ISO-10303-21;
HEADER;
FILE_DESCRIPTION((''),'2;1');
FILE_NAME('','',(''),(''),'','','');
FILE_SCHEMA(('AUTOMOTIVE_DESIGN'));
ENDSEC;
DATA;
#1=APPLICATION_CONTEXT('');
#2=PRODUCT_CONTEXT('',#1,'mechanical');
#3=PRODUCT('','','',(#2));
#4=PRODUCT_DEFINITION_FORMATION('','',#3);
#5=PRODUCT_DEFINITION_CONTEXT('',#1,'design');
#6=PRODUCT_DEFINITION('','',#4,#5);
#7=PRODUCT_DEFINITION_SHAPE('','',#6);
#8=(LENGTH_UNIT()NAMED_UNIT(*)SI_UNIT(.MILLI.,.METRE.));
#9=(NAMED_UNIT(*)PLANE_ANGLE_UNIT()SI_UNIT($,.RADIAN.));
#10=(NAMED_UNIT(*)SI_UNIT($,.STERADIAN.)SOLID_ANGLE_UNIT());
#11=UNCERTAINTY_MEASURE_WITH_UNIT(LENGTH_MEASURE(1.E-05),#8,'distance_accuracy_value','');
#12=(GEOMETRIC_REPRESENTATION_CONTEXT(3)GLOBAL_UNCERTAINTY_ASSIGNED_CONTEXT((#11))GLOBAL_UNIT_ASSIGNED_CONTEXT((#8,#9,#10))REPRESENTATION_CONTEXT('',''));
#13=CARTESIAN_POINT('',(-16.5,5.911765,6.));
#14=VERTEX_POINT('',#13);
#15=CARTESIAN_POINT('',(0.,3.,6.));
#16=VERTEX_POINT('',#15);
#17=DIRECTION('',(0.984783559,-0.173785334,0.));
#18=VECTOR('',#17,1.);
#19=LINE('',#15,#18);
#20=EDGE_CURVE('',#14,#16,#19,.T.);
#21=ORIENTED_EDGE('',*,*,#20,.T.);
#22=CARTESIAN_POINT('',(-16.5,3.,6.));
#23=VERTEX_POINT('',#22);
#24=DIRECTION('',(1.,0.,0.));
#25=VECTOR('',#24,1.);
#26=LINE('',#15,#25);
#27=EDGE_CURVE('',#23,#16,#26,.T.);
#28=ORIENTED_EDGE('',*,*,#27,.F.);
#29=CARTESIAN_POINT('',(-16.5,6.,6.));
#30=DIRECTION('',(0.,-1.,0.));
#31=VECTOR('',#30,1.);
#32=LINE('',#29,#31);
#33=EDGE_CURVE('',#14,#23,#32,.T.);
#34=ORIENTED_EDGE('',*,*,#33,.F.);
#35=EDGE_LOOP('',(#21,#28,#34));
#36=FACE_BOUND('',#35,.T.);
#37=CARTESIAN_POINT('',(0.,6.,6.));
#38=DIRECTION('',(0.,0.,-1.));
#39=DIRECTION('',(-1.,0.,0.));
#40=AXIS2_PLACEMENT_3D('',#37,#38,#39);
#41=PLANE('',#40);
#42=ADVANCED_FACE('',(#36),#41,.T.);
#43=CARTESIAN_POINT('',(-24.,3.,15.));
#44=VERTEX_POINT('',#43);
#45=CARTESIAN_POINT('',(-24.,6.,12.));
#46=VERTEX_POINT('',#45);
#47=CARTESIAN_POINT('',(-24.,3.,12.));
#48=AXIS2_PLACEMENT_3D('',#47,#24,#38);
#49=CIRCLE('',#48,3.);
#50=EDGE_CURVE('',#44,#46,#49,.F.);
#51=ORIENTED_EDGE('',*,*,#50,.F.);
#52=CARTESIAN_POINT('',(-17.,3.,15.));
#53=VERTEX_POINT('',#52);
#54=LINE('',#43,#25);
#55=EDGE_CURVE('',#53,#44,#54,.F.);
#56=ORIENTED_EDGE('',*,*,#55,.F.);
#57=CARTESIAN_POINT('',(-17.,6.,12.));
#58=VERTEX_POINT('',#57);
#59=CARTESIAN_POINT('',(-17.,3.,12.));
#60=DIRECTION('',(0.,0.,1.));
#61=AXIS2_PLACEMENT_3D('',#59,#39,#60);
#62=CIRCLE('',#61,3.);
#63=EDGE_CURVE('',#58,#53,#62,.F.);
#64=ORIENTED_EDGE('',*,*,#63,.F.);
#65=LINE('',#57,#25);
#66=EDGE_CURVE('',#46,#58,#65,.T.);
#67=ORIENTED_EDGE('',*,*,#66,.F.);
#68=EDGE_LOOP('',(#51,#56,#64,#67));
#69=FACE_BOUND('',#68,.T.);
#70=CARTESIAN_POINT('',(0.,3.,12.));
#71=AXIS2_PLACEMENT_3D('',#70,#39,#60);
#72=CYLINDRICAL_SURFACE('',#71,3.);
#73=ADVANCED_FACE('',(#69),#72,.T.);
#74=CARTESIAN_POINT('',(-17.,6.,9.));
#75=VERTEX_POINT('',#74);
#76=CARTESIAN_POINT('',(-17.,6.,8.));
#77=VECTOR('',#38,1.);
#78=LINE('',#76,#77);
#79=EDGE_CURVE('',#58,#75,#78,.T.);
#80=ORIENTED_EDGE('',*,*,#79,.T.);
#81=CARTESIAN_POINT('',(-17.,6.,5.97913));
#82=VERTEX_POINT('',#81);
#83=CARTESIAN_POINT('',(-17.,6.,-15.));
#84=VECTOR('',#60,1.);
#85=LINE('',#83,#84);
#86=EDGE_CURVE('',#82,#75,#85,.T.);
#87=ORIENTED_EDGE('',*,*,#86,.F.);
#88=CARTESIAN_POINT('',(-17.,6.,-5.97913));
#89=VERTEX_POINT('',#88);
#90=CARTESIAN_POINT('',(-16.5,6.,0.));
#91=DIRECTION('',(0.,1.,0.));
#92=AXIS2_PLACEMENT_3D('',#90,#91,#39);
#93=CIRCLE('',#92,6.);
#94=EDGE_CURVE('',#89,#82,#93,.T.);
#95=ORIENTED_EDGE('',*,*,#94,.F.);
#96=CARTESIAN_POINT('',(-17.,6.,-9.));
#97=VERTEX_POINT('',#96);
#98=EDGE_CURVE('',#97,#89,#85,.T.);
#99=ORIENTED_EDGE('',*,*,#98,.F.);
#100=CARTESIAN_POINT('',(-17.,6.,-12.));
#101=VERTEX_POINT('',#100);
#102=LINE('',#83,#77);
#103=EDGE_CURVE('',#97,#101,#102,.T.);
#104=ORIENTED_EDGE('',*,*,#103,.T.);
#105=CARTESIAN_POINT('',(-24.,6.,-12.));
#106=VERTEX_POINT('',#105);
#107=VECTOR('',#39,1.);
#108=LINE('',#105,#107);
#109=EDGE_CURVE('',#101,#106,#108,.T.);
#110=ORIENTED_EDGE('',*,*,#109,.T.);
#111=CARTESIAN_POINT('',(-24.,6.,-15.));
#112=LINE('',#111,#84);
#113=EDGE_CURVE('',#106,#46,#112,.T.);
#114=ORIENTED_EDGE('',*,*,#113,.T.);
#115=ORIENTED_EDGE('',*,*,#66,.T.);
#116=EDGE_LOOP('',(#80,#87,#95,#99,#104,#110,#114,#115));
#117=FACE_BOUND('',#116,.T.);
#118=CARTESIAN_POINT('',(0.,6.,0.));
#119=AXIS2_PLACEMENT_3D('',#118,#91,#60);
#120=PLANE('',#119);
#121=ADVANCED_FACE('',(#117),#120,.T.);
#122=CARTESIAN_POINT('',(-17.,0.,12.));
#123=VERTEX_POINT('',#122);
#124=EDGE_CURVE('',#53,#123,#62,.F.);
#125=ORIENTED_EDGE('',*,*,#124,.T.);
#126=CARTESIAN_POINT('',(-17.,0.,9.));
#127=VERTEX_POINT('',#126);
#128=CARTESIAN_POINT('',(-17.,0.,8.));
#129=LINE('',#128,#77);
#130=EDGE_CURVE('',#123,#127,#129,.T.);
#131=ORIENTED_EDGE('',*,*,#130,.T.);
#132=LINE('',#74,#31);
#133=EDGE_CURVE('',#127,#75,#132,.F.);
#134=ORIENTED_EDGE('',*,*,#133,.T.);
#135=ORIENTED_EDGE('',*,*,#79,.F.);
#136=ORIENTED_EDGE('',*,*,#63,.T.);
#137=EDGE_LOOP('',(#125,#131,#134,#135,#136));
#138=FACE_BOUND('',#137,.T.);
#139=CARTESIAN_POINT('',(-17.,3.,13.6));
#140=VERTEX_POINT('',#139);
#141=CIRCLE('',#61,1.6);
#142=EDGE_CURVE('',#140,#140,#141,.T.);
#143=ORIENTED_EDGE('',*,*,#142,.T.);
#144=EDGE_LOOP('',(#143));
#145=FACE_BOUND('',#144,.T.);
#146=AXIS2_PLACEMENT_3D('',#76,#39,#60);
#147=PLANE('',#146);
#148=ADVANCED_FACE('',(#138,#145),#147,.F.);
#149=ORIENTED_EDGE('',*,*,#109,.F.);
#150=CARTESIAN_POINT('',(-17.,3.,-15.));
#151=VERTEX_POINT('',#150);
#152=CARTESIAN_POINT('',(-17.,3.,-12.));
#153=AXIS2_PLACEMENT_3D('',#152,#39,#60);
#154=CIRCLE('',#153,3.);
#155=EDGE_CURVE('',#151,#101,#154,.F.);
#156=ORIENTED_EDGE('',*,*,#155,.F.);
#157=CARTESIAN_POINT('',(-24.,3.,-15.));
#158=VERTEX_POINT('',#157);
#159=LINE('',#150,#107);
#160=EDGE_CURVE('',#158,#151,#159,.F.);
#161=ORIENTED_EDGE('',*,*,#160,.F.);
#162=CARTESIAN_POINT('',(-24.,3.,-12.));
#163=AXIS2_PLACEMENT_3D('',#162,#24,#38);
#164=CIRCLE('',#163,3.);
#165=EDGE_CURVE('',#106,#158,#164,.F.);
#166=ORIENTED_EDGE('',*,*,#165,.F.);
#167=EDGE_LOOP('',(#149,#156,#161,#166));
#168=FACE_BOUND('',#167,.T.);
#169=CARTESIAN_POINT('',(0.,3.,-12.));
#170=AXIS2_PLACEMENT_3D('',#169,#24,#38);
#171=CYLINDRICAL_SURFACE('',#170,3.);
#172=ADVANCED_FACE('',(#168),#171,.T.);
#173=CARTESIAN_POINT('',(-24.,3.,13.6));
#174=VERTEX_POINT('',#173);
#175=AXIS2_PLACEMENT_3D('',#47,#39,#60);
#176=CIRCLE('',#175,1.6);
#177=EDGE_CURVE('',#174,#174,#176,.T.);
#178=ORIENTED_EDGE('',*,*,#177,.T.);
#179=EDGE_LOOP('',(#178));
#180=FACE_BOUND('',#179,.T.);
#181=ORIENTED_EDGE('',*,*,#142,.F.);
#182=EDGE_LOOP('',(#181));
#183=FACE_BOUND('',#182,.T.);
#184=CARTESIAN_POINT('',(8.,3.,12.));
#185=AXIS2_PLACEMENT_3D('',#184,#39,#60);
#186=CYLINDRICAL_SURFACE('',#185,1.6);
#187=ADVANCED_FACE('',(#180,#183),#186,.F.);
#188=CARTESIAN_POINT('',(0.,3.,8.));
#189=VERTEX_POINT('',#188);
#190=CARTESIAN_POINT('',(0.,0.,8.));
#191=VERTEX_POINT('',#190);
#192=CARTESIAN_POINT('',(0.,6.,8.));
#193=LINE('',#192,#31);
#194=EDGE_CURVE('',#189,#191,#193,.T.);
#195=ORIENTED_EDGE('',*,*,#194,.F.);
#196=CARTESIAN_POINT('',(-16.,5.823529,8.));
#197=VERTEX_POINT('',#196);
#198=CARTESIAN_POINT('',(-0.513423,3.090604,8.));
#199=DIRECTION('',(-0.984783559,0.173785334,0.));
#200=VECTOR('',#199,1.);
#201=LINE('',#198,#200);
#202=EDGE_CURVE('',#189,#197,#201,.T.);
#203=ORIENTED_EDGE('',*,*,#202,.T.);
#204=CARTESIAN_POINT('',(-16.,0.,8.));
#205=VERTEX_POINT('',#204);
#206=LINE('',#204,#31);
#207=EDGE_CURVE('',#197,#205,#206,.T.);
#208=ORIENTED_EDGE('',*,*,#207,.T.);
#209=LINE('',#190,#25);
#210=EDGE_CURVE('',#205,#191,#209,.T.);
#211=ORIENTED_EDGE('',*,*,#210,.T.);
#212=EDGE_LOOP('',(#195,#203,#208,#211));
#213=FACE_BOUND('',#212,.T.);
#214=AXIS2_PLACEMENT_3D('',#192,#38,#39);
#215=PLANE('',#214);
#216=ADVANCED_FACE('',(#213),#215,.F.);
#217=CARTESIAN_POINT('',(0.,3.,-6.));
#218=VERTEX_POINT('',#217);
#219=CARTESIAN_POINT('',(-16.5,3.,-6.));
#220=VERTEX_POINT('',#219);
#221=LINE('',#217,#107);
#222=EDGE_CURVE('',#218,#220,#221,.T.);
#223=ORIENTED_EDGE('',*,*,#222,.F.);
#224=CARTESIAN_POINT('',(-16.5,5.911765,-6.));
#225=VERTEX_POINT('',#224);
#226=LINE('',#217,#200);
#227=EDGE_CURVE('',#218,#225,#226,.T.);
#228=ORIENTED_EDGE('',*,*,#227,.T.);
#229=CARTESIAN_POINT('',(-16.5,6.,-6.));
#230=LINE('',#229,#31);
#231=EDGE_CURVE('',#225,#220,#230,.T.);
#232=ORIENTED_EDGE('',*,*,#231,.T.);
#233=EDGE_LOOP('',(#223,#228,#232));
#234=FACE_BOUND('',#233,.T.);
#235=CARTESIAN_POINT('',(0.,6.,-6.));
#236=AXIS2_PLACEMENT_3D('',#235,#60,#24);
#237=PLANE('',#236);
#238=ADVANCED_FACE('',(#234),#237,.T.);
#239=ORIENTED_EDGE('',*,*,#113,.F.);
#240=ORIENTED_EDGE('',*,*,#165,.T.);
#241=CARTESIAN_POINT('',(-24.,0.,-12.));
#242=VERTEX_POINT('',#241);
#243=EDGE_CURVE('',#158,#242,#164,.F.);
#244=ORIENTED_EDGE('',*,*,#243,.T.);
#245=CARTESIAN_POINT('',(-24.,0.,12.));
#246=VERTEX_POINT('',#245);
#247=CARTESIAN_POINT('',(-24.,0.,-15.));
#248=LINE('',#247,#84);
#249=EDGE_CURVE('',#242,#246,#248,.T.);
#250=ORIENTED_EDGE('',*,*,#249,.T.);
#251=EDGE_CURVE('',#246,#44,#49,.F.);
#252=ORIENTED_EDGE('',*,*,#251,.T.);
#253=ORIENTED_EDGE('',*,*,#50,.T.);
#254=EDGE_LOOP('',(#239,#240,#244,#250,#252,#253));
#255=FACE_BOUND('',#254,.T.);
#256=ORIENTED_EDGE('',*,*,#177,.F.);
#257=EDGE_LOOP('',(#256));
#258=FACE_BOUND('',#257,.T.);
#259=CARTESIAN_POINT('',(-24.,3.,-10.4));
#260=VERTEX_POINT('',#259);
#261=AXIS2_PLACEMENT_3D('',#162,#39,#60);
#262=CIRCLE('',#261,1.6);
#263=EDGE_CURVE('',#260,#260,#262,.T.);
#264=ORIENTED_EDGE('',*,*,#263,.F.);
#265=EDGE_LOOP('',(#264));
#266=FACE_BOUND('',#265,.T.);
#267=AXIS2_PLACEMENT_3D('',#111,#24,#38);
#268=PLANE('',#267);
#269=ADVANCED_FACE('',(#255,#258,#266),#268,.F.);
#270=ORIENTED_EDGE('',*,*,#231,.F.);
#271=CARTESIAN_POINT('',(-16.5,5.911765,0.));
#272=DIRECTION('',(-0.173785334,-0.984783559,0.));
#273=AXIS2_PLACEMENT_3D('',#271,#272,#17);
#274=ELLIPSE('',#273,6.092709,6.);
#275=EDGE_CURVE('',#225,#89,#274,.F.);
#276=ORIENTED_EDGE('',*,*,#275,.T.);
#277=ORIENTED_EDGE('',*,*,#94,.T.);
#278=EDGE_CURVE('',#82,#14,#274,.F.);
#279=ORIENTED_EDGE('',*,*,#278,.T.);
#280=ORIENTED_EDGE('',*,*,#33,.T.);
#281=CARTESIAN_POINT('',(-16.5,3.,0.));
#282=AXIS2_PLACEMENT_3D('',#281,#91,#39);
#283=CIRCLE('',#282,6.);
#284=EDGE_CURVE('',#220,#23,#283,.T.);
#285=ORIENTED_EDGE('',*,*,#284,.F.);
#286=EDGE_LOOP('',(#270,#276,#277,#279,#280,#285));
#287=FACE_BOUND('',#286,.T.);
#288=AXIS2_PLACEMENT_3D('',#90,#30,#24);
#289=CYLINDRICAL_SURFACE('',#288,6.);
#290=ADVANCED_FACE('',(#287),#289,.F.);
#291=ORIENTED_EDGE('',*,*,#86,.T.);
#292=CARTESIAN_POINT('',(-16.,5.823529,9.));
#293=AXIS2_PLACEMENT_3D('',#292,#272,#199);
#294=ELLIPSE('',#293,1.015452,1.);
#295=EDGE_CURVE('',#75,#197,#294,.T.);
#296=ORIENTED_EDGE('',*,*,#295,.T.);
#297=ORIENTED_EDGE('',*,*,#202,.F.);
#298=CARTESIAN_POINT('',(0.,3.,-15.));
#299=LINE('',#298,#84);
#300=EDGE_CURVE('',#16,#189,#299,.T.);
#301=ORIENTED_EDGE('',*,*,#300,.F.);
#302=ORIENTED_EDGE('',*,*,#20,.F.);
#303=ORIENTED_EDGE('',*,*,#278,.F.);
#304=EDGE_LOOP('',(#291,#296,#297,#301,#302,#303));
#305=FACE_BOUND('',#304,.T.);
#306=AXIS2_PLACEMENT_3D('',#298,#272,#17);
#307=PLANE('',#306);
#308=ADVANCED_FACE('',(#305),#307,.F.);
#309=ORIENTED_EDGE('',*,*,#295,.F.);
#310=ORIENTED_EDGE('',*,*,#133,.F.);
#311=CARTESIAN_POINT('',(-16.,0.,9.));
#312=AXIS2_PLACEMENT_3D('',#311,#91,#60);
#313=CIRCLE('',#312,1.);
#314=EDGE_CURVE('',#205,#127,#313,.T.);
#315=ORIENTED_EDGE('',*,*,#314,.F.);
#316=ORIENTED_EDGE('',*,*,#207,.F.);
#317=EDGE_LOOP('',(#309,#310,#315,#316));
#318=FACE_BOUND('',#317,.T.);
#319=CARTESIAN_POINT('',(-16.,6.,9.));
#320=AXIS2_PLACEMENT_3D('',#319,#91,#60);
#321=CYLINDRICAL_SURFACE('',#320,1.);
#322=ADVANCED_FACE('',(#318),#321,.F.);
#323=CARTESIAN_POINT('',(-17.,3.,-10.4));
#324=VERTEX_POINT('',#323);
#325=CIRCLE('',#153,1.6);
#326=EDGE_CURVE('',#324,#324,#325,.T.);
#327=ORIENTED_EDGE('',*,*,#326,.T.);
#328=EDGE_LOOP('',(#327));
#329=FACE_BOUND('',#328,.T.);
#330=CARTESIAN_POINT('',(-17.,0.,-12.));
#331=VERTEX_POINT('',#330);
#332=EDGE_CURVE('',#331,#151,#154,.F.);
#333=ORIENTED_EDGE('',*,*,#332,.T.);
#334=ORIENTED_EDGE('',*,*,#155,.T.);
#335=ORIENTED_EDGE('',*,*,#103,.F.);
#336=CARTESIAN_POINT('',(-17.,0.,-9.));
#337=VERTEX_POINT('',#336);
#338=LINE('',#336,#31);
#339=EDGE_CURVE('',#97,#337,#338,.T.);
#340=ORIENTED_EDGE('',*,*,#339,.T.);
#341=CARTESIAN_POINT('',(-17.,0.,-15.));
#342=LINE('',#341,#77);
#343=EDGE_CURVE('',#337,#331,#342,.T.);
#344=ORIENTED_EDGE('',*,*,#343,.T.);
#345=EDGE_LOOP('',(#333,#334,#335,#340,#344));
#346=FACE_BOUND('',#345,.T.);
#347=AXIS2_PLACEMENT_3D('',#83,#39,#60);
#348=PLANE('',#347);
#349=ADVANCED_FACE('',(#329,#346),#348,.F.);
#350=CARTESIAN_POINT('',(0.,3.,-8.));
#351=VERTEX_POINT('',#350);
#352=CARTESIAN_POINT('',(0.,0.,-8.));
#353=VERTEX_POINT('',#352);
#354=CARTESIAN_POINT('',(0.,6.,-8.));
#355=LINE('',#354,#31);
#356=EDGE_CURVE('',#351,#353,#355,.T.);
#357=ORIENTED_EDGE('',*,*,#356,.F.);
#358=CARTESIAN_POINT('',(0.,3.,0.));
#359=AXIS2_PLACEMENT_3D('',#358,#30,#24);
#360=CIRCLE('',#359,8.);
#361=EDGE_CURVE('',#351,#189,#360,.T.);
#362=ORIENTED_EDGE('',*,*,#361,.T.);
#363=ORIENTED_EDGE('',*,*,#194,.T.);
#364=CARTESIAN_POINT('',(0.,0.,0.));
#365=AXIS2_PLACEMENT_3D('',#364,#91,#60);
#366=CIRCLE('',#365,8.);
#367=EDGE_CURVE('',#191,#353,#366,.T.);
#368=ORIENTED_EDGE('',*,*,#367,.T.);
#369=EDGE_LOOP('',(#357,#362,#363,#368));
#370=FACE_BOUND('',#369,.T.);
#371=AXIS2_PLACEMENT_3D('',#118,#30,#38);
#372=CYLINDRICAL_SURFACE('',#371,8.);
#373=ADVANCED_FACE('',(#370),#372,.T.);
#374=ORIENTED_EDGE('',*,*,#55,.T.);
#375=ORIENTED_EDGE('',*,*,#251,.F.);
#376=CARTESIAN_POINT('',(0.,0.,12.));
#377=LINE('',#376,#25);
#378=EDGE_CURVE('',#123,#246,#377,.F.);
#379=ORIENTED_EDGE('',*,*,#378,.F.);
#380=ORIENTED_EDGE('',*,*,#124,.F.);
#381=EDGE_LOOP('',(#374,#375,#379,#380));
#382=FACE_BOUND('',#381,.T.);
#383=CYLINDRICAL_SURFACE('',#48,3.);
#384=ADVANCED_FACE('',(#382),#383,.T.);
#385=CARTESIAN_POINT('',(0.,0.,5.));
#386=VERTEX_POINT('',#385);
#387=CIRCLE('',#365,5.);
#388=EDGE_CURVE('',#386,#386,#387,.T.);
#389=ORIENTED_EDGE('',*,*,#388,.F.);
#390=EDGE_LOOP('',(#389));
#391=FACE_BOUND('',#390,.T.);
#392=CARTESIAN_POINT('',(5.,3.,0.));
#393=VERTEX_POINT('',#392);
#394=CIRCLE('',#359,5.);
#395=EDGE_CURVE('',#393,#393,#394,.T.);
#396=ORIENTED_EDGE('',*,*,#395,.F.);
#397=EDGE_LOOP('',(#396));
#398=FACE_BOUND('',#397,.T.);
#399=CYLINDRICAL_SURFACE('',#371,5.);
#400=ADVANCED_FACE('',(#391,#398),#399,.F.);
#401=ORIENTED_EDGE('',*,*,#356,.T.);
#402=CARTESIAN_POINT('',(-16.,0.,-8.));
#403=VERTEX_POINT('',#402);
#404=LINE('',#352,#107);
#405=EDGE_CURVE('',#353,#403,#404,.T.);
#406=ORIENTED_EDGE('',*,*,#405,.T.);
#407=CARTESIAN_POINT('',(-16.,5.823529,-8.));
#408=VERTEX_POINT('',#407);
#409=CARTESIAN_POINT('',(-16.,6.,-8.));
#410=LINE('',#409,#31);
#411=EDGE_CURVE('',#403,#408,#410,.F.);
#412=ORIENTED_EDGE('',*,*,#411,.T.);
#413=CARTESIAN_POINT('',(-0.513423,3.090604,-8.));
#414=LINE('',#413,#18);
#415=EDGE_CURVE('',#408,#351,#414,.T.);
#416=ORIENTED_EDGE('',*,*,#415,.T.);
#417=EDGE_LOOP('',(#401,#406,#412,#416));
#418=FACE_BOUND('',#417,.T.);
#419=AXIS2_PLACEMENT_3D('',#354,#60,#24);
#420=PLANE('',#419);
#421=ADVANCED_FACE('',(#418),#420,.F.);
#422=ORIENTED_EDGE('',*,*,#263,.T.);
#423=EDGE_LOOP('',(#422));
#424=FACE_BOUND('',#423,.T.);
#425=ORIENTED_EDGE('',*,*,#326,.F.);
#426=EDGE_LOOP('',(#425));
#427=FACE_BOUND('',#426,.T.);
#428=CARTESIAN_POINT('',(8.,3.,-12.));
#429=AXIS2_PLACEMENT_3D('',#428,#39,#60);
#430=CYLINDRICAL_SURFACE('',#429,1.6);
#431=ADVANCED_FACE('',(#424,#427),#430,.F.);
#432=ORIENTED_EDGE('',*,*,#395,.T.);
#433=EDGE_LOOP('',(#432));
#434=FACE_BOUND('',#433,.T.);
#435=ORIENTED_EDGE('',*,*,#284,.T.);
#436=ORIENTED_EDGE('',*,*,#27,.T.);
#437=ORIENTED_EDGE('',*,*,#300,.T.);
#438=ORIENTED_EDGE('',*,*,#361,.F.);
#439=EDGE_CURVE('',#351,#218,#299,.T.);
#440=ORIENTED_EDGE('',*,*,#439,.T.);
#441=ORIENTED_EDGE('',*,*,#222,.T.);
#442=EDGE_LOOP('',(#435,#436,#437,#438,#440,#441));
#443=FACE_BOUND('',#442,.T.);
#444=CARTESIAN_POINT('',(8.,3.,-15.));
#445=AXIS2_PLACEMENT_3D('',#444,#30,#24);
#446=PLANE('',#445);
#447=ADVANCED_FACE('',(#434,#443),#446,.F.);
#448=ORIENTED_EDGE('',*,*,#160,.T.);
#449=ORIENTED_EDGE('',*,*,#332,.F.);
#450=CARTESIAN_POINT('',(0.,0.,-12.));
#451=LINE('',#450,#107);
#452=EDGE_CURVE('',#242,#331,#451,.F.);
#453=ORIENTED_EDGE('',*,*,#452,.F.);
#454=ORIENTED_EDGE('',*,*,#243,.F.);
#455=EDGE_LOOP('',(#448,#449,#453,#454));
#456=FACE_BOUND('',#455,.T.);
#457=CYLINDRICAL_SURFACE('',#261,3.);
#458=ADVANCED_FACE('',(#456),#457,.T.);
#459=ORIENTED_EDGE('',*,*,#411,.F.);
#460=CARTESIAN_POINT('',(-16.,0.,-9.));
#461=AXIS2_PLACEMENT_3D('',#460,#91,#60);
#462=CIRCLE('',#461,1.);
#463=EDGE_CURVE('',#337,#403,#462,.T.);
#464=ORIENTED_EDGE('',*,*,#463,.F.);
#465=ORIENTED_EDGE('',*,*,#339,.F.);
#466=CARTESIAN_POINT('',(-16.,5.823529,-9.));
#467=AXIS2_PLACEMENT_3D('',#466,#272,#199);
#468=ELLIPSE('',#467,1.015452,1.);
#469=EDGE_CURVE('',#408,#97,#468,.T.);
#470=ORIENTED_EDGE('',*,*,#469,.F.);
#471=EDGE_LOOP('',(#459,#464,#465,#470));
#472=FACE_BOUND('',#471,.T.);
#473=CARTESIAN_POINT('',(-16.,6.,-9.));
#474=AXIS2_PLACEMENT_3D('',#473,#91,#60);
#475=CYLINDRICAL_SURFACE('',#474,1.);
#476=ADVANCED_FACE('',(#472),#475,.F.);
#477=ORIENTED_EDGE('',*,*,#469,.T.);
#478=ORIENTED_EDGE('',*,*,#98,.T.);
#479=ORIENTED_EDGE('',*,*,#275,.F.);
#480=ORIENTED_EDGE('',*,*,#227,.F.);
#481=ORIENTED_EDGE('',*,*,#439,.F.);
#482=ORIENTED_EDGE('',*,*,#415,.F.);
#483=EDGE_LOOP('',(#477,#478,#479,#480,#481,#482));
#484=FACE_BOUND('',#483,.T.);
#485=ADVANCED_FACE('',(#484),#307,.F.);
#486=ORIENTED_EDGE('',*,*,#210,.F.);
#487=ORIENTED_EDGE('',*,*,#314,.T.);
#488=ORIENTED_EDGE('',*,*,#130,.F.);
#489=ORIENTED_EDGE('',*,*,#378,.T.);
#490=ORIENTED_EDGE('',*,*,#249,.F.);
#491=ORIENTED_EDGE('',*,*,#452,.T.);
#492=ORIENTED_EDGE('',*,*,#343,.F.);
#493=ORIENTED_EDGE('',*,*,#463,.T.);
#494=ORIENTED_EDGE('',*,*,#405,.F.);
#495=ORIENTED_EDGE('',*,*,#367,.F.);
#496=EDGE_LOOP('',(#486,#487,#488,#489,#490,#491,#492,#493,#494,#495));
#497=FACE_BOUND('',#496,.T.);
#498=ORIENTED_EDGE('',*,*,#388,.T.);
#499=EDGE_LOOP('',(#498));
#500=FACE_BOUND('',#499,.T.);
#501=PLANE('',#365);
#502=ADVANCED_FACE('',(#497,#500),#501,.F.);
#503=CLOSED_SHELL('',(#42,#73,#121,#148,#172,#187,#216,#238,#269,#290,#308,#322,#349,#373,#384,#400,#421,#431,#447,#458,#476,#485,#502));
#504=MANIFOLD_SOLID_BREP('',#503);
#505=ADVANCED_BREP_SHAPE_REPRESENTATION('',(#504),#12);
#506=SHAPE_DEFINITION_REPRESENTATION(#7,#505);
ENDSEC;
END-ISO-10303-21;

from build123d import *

# Parameters (mm, degrees)
SKETCH1_R               = 5
BOSS_EXTRUDE1_DEPTH     = 6
FILLET1_R               = 3
SKETCH2_R               = 1.6
CUT_EXTRUDE1_DEPTH      = 36.846896658
CUT_EXTRUDE2_DEPTH      = 29.930952283
CUT_EXTRUDE2_DEPTH_BACK = 29.930952283
CUT_EXTRUDE3_DEPTH      = 29.460498942
FILLET3_R               = 1


with BuildPart() as part:
    # Sketch1 → Boss-Extrude1 (new body)
    with BuildSketch(Plane(origin=(0, 0, 0), x_dir=(1, 0, 0), z_dir=(0, 1, 0))):
        with BuildLine():
            Line((0, 8), (-17, 8))
            Line((-17, 8), (-17, 15))
            Line((-17, 15), (-24, 15))
            Line((-24, 15), (-24, -15))
            Line((-24, -15), (-17, -15))
            Line((-17, -15), (-17, -8))
            Line((-17, -8), (0, -8))
            ThreePointArc((0, -8), (8, 0), (0, 8))
        make_face()
        with Locations(Location((0, 0, 0), (0, 0, 270))):
            Circle(SKETCH1_R, mode=Mode.SUBTRACT)
    extrude(amount=BOSS_EXTRUDE1_DEPTH)

    # Fillet1
    fillet1_edges = [part.edges().sort_by_distance(p)[0] for p in [
        (-20.5, 0, -15),
        (-20.5, 6, -15),
        (-20.5, 0, 15),
        (-20.5, 6, 15),
    ]]
    fillet(fillet1_edges, radius=FILLET1_R - 0.0001)  # a hair under: the kernel refuses the full size

    # Sketch2 → Cut-Extrude1 (cut, through all)
    with BuildSketch(Plane.ZY.offset(24)):
        with Locations((-12, 3)):
            Circle(SKETCH2_R)
        with Locations((12, 3)):
            Circle(SKETCH2_R)
    extrude(amount=-CUT_EXTRUDE1_DEPTH, mode=Mode.SUBTRACT)

    # Sketch3 → Cut-Extrude2 (cut, two sides: drawn at the far end of the back side and taken through both)
    with BuildSketch(Plane.XY.offset(-CUT_EXTRUDE2_DEPTH_BACK)):
        Polygon((-17, 6), (8, 6), (8, 3), (0, 3), align=None)
    extrude(amount=CUT_EXTRUDE2_DEPTH + CUT_EXTRUDE2_DEPTH_BACK, mode=Mode.SUBTRACT)

    # Sketch4 → Cut-Extrude3 (cut, through all)
    with BuildSketch(Plane(origin=(0, 3, 0), x_dir=(1, 0, 0), z_dir=(0, 1, 0))):
        with BuildLine():
            Line((0, -6), (-16.5, -6))
            ThreePointArc((-16.5, -6), (-22.5, 0), (-16.5, 6))
            Line((-16.5, 6), (0, 6))
            ThreePointArc((0, 6), (6, 0), (0, -6))
        make_face()
    extrude(amount=CUT_EXTRUDE3_DEPTH, mode=Mode.SUBTRACT)

    # Fillet3
    fillet3_edges = [part.edges().sort_by_distance(p)[0] for p in [
        (-17, 3, -8),
        (-17, 3, 8),
    ]]
    fillet(fillet3_edges, radius=FILLET3_R)


solid = part.part
